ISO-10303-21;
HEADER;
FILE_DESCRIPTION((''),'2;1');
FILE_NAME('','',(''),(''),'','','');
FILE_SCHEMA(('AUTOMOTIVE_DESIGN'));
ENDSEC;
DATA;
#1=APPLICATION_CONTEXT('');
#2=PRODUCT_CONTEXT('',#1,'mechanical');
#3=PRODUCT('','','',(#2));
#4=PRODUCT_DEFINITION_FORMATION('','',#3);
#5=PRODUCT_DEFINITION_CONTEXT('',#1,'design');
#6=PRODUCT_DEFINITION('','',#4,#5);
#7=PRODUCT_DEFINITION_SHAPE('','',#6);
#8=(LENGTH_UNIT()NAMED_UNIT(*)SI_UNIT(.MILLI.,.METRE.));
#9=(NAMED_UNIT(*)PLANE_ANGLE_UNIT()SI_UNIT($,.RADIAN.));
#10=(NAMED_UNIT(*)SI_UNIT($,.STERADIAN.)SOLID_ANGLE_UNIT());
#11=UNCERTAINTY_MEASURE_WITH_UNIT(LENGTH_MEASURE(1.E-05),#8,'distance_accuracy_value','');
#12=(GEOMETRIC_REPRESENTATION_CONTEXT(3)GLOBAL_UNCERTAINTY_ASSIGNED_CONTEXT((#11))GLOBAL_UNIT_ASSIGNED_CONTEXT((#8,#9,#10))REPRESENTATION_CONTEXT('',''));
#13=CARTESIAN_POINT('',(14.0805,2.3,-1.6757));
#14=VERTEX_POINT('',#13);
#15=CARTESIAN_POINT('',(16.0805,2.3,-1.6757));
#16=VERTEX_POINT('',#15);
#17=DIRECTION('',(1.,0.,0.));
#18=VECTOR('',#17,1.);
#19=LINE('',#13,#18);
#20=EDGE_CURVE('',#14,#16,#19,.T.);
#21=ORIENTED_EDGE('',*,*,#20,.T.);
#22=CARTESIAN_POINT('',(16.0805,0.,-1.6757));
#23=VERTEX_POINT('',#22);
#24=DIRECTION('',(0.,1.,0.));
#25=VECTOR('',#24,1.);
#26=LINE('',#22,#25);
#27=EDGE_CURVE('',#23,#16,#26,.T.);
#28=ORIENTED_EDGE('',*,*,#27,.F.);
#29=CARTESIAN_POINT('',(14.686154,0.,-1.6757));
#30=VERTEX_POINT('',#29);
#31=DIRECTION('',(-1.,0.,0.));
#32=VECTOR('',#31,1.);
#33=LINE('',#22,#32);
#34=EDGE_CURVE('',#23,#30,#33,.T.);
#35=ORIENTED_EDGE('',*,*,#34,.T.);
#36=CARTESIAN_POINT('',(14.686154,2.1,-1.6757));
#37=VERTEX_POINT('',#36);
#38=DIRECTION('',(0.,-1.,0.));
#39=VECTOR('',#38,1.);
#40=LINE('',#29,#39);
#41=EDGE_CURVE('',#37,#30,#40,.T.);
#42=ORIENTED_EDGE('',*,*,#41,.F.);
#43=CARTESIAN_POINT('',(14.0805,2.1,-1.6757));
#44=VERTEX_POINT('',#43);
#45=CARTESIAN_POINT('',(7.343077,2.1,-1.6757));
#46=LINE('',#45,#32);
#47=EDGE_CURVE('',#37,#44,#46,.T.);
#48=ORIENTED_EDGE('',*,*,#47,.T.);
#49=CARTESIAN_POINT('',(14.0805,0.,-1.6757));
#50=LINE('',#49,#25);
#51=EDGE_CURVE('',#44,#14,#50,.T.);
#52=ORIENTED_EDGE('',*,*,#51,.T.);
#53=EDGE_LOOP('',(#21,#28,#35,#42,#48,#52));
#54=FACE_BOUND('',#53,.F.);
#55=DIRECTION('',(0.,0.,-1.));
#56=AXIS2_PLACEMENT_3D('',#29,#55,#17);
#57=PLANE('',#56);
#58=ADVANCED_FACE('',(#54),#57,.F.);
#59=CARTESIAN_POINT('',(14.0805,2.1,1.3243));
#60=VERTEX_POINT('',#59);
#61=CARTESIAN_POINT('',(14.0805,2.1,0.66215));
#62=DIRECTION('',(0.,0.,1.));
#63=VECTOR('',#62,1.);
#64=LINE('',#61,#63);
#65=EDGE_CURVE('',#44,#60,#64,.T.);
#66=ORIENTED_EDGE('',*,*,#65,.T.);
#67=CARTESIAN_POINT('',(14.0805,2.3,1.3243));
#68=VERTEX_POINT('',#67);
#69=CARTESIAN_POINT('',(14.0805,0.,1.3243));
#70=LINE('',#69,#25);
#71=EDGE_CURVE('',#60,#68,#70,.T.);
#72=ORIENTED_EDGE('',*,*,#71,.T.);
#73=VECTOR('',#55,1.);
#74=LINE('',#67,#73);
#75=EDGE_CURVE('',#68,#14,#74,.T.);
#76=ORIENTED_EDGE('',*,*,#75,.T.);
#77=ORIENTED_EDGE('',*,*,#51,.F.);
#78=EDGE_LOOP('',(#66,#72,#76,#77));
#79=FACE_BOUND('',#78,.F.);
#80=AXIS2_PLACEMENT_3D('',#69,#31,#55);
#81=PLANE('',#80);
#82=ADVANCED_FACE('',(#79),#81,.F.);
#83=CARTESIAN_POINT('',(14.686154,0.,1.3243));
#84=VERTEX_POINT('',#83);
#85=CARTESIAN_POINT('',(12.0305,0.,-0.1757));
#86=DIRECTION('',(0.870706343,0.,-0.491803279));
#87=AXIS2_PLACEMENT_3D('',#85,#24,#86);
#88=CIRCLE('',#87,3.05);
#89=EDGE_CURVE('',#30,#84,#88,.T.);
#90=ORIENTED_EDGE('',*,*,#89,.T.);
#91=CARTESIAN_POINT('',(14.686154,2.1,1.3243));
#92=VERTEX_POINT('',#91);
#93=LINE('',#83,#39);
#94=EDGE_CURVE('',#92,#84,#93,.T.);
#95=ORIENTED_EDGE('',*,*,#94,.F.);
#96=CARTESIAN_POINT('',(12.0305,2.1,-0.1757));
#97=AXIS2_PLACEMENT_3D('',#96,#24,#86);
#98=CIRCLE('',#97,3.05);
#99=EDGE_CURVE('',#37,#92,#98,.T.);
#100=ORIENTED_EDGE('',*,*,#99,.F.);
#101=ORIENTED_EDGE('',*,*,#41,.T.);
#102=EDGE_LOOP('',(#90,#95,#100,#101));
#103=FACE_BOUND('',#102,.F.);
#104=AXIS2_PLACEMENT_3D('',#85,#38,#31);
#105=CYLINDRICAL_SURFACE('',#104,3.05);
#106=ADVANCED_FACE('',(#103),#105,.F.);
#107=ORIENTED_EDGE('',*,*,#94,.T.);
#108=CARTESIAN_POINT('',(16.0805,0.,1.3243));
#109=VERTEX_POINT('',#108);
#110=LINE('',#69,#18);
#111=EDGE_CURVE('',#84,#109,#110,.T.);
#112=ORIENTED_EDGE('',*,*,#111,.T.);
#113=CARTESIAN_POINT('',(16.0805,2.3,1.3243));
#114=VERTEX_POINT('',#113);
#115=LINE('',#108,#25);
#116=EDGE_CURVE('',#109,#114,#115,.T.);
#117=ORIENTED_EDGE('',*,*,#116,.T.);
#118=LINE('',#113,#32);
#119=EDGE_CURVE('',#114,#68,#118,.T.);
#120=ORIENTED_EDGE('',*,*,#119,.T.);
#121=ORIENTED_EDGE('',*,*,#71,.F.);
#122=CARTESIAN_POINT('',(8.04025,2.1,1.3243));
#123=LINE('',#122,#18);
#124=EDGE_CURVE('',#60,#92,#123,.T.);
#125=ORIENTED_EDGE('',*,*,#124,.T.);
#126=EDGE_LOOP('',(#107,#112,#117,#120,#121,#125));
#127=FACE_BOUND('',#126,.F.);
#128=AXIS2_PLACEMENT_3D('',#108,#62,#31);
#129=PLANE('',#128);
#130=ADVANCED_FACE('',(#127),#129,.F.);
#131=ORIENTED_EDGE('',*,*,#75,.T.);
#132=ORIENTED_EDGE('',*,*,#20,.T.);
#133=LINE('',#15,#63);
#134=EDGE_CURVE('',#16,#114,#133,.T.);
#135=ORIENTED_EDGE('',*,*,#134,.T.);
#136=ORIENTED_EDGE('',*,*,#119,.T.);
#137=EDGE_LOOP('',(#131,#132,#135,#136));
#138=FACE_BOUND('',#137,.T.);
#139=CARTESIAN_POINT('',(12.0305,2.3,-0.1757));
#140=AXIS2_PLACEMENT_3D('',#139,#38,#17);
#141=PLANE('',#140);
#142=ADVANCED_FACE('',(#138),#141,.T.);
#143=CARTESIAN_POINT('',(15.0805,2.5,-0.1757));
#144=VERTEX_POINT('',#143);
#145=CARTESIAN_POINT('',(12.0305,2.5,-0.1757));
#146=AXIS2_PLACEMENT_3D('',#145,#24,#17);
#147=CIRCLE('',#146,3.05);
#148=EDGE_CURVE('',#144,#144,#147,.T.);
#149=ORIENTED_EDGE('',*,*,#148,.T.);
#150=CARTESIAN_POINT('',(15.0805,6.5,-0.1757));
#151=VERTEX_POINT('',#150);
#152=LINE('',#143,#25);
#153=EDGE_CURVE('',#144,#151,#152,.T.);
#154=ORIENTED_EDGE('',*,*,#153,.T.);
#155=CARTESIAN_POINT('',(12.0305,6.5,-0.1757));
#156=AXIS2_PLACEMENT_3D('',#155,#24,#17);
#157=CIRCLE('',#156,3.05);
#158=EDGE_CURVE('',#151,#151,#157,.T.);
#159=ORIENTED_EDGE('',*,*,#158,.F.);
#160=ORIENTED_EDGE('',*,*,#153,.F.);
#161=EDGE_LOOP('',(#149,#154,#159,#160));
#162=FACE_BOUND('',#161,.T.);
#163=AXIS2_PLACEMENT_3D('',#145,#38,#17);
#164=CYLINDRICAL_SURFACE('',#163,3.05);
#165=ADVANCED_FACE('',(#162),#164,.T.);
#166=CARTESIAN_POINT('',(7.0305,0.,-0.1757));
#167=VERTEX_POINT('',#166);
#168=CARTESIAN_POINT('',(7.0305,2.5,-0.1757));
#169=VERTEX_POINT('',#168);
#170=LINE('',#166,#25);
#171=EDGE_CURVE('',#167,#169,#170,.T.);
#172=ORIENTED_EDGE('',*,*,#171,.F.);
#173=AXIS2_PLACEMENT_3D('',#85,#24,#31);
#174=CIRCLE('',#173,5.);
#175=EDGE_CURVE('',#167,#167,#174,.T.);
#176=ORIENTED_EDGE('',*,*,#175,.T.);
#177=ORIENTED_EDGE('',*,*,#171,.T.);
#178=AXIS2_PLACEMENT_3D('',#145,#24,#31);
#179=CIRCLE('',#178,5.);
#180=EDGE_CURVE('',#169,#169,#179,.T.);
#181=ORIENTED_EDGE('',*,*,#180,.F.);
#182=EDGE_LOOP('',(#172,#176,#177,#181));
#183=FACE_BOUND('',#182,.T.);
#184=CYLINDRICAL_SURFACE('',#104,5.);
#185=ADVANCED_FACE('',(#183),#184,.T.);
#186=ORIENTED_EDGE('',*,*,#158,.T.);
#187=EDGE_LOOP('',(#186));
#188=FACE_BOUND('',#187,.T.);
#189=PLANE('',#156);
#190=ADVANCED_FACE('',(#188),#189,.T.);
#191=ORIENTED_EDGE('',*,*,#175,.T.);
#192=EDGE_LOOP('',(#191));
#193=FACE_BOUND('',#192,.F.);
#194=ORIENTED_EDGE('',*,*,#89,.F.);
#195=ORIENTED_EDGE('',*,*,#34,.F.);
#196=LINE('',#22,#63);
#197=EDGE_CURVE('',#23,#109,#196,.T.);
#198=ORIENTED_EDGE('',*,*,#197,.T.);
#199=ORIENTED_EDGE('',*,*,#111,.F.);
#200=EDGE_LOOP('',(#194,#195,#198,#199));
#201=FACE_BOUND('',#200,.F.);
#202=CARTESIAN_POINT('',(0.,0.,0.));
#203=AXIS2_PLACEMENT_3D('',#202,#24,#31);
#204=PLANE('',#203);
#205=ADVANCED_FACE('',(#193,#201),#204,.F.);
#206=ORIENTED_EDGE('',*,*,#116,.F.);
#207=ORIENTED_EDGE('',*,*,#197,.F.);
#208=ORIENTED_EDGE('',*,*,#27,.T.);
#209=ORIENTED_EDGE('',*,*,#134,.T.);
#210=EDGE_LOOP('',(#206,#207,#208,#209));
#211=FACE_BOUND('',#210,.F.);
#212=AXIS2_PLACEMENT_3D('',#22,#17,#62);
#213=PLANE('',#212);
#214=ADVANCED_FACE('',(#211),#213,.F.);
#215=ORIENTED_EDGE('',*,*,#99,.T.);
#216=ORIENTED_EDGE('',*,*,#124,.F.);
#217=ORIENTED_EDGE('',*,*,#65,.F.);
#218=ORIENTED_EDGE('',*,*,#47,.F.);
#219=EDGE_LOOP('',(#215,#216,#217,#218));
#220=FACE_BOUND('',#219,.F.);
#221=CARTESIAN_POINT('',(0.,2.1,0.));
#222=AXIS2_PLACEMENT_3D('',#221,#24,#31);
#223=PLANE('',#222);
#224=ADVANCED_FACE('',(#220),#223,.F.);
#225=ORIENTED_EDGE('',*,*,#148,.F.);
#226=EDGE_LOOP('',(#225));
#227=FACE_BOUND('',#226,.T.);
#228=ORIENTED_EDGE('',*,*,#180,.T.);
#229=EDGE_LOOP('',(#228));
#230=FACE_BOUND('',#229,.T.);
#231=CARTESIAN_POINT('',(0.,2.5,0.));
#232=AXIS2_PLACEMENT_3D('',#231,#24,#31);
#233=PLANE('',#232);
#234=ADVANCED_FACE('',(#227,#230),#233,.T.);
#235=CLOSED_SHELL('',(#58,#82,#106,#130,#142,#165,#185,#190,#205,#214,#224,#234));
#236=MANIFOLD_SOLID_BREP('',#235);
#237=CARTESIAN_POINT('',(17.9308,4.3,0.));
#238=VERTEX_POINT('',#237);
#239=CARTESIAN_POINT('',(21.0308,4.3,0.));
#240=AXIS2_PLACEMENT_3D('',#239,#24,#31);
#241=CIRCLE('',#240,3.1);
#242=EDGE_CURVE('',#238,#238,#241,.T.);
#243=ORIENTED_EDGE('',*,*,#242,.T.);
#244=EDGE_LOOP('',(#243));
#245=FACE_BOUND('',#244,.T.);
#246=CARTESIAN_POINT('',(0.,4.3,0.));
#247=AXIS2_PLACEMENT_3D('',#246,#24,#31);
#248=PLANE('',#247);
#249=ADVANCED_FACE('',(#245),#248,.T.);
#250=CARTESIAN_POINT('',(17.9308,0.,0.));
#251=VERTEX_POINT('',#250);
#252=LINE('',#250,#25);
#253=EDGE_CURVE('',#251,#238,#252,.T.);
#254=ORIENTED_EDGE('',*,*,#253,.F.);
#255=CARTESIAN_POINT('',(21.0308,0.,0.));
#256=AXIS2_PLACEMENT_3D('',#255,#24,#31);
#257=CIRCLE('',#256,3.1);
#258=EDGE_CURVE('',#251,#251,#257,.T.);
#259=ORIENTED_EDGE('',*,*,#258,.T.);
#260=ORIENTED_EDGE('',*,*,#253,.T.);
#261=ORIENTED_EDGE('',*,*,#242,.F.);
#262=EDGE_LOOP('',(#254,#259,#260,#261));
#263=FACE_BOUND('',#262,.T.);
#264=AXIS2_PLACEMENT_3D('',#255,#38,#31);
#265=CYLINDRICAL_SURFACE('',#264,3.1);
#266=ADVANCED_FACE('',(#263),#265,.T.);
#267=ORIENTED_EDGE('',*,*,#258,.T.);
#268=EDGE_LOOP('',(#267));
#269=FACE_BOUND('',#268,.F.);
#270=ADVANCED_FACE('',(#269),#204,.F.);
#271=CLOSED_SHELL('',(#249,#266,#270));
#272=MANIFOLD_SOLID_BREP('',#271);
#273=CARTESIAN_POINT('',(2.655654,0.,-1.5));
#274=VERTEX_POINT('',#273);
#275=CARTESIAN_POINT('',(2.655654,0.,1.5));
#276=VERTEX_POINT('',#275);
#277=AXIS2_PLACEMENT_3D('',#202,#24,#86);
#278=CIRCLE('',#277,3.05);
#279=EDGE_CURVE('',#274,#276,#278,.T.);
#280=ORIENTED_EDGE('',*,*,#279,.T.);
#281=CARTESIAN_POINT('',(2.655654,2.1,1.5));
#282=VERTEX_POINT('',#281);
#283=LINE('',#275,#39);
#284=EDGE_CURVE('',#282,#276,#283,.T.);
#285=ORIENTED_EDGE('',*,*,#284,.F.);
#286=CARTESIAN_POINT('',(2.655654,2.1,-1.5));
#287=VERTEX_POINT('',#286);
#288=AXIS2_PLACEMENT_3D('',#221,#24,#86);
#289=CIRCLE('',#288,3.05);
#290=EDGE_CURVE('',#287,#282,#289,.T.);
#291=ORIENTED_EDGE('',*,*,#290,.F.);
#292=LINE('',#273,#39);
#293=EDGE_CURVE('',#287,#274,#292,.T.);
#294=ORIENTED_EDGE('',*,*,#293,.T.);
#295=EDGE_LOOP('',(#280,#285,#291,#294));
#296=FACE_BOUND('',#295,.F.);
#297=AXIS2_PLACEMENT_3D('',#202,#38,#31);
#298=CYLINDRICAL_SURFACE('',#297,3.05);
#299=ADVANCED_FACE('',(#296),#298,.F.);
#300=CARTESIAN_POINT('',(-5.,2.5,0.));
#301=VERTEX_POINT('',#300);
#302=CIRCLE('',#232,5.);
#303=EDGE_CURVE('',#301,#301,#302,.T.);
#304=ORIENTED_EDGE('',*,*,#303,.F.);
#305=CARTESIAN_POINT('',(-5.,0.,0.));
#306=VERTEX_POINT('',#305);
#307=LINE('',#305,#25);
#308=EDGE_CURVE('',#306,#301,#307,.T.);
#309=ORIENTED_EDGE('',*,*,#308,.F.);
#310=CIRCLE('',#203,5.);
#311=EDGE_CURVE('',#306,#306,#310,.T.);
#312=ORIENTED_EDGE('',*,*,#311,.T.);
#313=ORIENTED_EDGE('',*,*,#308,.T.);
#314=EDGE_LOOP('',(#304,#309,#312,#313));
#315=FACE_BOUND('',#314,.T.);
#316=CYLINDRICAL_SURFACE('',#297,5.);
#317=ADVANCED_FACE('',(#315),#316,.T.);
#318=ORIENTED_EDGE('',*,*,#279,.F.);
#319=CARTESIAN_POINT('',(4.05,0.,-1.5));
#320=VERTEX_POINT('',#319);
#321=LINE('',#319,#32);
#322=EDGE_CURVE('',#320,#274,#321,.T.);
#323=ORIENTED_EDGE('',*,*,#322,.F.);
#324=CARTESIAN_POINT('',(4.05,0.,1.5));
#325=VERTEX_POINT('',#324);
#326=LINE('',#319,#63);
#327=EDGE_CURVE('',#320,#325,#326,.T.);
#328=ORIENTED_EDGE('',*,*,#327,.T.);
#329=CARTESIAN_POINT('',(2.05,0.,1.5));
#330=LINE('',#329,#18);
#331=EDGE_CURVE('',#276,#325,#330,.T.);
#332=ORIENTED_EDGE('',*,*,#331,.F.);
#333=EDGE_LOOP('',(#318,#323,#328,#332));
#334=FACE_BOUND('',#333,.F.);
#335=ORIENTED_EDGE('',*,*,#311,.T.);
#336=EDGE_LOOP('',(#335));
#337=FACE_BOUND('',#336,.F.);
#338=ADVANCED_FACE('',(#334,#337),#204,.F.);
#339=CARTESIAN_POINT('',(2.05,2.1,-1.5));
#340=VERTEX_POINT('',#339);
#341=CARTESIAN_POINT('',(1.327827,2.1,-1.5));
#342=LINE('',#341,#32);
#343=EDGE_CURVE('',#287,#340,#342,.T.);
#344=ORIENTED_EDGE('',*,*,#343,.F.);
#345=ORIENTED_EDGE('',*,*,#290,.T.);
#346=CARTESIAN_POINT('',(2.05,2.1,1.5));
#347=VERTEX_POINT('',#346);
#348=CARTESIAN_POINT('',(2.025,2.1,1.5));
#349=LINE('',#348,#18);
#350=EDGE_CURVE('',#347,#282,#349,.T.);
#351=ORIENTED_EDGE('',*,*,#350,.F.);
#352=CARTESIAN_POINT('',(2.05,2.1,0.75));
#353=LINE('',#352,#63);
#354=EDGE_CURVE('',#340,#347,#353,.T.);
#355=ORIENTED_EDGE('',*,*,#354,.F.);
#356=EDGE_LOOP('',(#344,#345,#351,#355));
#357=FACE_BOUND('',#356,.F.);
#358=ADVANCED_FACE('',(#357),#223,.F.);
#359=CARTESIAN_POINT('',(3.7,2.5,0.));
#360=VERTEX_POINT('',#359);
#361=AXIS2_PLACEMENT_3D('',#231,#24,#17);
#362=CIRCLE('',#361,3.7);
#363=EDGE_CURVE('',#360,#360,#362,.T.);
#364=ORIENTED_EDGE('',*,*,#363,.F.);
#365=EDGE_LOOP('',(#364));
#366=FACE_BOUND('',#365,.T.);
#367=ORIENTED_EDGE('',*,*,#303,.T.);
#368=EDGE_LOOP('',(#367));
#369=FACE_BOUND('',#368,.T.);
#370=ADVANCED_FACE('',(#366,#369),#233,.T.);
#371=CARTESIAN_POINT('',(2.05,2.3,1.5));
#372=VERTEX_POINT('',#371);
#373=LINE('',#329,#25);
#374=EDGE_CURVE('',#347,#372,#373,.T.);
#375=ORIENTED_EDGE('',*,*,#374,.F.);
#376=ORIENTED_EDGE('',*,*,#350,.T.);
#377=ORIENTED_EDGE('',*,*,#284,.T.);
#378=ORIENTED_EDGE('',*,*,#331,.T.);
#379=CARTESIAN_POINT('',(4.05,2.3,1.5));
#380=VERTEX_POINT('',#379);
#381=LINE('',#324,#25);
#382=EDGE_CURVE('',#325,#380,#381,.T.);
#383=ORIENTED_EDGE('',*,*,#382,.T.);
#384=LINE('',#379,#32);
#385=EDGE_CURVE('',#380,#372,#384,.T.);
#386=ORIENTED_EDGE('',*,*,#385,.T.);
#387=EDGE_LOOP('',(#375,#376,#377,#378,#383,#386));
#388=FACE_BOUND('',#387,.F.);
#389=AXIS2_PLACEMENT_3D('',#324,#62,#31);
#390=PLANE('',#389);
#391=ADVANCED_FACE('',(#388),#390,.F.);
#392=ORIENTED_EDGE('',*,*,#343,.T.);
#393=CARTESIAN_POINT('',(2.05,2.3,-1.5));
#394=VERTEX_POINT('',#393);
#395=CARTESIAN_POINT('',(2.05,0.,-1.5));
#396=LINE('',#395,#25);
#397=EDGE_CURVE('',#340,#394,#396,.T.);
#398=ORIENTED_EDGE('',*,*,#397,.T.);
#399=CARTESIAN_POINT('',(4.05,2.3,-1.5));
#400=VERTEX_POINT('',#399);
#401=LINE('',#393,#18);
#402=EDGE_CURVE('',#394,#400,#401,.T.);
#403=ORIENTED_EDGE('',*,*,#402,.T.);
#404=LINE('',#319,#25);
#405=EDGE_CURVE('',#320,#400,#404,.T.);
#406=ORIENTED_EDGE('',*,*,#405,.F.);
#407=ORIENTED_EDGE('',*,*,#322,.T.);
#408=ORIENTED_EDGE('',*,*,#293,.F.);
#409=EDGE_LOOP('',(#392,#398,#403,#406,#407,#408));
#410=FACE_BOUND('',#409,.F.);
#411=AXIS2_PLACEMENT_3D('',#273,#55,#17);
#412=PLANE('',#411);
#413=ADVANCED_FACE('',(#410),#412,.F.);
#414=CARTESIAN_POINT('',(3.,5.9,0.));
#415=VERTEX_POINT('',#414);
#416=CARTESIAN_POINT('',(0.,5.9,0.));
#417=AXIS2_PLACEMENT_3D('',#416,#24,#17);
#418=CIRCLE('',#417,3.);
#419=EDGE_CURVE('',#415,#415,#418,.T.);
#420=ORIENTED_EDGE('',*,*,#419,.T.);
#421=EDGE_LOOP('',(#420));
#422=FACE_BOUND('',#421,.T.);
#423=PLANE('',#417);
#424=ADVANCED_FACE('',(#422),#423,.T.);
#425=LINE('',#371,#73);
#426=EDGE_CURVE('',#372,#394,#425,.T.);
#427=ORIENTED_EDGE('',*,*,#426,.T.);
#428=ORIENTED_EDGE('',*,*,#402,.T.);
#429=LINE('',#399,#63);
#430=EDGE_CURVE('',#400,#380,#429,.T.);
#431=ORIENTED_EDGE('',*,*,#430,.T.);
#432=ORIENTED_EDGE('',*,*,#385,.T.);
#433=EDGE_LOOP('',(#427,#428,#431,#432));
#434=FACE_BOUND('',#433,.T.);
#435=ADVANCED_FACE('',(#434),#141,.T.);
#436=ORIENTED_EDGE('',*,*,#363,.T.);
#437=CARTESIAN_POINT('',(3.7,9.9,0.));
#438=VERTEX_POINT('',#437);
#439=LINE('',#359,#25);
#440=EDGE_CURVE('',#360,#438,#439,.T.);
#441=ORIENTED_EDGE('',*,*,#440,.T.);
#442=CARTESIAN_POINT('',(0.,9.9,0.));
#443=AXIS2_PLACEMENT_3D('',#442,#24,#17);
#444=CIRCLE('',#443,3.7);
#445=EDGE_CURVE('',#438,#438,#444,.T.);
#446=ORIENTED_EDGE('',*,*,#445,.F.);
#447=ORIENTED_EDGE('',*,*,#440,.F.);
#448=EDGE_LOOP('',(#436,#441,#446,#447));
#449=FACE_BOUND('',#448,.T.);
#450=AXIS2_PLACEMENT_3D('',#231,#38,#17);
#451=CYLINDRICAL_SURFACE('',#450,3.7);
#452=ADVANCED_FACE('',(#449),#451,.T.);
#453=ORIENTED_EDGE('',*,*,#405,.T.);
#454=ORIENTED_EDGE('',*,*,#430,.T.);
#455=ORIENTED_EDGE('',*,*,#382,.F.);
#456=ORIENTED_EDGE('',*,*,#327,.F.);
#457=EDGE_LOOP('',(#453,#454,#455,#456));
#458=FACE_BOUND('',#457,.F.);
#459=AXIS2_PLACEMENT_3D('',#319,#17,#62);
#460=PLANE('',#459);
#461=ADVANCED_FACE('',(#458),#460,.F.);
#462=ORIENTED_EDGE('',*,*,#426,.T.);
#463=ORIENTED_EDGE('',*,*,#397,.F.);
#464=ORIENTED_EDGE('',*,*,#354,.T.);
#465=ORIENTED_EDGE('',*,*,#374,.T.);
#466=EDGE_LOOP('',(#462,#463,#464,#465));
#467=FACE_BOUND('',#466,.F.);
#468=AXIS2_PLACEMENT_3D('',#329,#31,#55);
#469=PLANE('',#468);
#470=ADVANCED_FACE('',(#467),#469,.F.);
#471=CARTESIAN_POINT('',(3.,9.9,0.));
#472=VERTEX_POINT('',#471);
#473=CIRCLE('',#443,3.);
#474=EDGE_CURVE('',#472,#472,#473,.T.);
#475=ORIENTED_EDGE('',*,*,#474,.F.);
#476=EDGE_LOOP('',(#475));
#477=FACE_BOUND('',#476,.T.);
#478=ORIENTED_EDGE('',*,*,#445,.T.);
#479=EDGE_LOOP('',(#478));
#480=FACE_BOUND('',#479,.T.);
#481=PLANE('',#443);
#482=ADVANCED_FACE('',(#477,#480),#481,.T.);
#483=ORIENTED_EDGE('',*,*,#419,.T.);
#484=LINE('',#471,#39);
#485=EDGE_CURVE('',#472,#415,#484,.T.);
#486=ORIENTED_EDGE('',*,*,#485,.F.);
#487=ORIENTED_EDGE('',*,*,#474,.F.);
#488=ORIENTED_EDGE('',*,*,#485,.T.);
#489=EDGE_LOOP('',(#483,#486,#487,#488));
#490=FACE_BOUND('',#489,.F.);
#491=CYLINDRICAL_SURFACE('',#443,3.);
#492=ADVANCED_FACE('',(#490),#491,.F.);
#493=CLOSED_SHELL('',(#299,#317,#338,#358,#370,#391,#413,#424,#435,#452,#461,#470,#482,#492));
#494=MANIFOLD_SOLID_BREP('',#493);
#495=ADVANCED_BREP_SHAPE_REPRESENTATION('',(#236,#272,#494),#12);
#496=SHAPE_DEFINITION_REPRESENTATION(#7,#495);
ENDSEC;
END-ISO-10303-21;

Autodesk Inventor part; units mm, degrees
ref_plane "YZ Plane" through (0, 0, 0) normal (1, 0, 0) x (0, 1, 0)
ref_plane "XZ Plane" through (0, 0, 0) normal (0, 1, 0) x (-1, 0, 0)
ref_plane "XY Plane" through (0, 0, 0) normal (0, 0, 1) x (1, 0, 0)
sketch "Sketch4" plane through (0, 0, 0) normal (0, 1, 0) x (-1, 0, 0)
  circle A0 centre (0, 0) radius 3.05
  circle A1 centre (0, 0) radius 5
  circle A2 centre (-12.0305, -0.1757) radius 3.05
  circle A3 centre (-12.0305, -0.1757) radius 5
  circle A4 centre (-21.0308, 0) radius 3.1
  dimension "d13" = 6.1
  dimension "d14" = 10
  dimension "d25" = 6.1
  dimension "d26" = 10
  dimension "d30" = 6.2
extrude "Extrusion5" add sketch "Sketch4" along normal blind 2.5 contours A0 | A1 | A2 | A3
extrude "Extrusion6" cut sketch "Sketch4" along normal blind 2.1 contours A0 | A2
sketch "Sketch5" plane through (0, 2.5, 0) normal (0, 1, 0) x (1, 0, 0)
  circle A0 centre (0, 0) radius 3.7
  dimension "d19" = 7.4
extrude "Extrusion7" add sketch "Sketch5" along normal blind 7.4
sketch "Sketch6" plane through (0, 9.9, 0) normal (0, 1, 0) x (1, 0, 0)
  circle A0 centre (0, 0) radius 3
  dimension "d22" = 6
extrude "Extrusion8" cut sketch "Sketch6" against normal blind 4
sketch "Sketch7" plane through (12.0305, 2.5, -0.1757) normal (0, 1, 0) x (1, 0, 0)
  circle A0 centre (0, 0) radius 3.05
  circle A1 centre (0, 0) radius 5 projected
  point P0 (-12.0305, -0.1757)
  dimension "d27" = 6.1
extrude "Extrusion9" add sketch "Sketch7" along normal blind 4 contours A0
extrude "Extrusion10" add sketch "Sketch4" along normal blind 4.3 contours A4
sketch "Sketch8" plane through (0, 0, 0) normal (0, 1, 0) x (-1, 0, 0)
  circle A0 centre (0, 0) radius 3.05 projected
  circle A1 centre (0, 0) radius 5 projected
  circle A2 centre (-12.0305, -0.1757) radius 5 projected
split body "Split1" sketch "Sketch8" result two bodies curves A1 first body at (3.1896, 7.4333, 0.2575)
split body "Split2" sketch "Sketch8" result two bodies bodies 3 curves A2 first body at (7.5887, 1.6667, -0.8976)
sketch "Sketch9" plane through (12.0305, 0, -0.1757) normal (0, -1, 0) x (1, 0, 0)
  line L0 (-7.9805, 1.6757) -> (-9.9805, 1.6757)
  line L1 (-9.9805, 1.6757) -> (-9.9805, -1.3243)
  line L2 (-9.9805, -1.3243) -> (-7.9805, -1.3243)
  line L3 (-7.9805, -1.3243) -> (-7.9805, 1.6757)
  circle A0 centre (-12.0305, 0.1757) radius 3.05 projected
  line L4 (4.05, 1.5) -> (2.05, 1.5)
  line L5 (2.05, 1.5) -> (2.05, -1.5)
  line L6 (2.05, -1.5) -> (4.05, -1.5)
  line L7 (4.05, -1.5) -> (4.05, 1.5)
  circle A1 centre (0, 0) radius 3.05 projected
  point P0 (-9.9805, 0.1757)
  point P1 (2.05, 0)
  dimension "d33" = 2
  dimension "d34" = 3
  dimension "d35" = 1
  dimension "d36" = 2
  dimension "d37" = 3
  dimension "d38" = 1
extrude "Extrusion11" cut sketch "Sketch9" against normal blind 2.3 contours L3 L2 A0 L0 | A0 L2 L1 L0 | L7 L6 A1 L4 | A1 L6 L5 L4 picked at (-9.6472, 0.1757) picked at (2.3833, 0) bodies 4 2
equation "\"d19\" = Shaft_Diameter - Shaft_Fit_Loose"
equation "\"d20\" = Shaft_Width + Shaft_Width_Free_Space"
equation "\"Shaft_Diameter\" = 8"
equation "\"Shaft_Fit_Loose\" = 0.6"
equation "\"Shaft_Width\" = 7"
equation "\"Shaft_Width_Free_Space\" = 0.4"
properties part number "Multiboard Thread insert"
